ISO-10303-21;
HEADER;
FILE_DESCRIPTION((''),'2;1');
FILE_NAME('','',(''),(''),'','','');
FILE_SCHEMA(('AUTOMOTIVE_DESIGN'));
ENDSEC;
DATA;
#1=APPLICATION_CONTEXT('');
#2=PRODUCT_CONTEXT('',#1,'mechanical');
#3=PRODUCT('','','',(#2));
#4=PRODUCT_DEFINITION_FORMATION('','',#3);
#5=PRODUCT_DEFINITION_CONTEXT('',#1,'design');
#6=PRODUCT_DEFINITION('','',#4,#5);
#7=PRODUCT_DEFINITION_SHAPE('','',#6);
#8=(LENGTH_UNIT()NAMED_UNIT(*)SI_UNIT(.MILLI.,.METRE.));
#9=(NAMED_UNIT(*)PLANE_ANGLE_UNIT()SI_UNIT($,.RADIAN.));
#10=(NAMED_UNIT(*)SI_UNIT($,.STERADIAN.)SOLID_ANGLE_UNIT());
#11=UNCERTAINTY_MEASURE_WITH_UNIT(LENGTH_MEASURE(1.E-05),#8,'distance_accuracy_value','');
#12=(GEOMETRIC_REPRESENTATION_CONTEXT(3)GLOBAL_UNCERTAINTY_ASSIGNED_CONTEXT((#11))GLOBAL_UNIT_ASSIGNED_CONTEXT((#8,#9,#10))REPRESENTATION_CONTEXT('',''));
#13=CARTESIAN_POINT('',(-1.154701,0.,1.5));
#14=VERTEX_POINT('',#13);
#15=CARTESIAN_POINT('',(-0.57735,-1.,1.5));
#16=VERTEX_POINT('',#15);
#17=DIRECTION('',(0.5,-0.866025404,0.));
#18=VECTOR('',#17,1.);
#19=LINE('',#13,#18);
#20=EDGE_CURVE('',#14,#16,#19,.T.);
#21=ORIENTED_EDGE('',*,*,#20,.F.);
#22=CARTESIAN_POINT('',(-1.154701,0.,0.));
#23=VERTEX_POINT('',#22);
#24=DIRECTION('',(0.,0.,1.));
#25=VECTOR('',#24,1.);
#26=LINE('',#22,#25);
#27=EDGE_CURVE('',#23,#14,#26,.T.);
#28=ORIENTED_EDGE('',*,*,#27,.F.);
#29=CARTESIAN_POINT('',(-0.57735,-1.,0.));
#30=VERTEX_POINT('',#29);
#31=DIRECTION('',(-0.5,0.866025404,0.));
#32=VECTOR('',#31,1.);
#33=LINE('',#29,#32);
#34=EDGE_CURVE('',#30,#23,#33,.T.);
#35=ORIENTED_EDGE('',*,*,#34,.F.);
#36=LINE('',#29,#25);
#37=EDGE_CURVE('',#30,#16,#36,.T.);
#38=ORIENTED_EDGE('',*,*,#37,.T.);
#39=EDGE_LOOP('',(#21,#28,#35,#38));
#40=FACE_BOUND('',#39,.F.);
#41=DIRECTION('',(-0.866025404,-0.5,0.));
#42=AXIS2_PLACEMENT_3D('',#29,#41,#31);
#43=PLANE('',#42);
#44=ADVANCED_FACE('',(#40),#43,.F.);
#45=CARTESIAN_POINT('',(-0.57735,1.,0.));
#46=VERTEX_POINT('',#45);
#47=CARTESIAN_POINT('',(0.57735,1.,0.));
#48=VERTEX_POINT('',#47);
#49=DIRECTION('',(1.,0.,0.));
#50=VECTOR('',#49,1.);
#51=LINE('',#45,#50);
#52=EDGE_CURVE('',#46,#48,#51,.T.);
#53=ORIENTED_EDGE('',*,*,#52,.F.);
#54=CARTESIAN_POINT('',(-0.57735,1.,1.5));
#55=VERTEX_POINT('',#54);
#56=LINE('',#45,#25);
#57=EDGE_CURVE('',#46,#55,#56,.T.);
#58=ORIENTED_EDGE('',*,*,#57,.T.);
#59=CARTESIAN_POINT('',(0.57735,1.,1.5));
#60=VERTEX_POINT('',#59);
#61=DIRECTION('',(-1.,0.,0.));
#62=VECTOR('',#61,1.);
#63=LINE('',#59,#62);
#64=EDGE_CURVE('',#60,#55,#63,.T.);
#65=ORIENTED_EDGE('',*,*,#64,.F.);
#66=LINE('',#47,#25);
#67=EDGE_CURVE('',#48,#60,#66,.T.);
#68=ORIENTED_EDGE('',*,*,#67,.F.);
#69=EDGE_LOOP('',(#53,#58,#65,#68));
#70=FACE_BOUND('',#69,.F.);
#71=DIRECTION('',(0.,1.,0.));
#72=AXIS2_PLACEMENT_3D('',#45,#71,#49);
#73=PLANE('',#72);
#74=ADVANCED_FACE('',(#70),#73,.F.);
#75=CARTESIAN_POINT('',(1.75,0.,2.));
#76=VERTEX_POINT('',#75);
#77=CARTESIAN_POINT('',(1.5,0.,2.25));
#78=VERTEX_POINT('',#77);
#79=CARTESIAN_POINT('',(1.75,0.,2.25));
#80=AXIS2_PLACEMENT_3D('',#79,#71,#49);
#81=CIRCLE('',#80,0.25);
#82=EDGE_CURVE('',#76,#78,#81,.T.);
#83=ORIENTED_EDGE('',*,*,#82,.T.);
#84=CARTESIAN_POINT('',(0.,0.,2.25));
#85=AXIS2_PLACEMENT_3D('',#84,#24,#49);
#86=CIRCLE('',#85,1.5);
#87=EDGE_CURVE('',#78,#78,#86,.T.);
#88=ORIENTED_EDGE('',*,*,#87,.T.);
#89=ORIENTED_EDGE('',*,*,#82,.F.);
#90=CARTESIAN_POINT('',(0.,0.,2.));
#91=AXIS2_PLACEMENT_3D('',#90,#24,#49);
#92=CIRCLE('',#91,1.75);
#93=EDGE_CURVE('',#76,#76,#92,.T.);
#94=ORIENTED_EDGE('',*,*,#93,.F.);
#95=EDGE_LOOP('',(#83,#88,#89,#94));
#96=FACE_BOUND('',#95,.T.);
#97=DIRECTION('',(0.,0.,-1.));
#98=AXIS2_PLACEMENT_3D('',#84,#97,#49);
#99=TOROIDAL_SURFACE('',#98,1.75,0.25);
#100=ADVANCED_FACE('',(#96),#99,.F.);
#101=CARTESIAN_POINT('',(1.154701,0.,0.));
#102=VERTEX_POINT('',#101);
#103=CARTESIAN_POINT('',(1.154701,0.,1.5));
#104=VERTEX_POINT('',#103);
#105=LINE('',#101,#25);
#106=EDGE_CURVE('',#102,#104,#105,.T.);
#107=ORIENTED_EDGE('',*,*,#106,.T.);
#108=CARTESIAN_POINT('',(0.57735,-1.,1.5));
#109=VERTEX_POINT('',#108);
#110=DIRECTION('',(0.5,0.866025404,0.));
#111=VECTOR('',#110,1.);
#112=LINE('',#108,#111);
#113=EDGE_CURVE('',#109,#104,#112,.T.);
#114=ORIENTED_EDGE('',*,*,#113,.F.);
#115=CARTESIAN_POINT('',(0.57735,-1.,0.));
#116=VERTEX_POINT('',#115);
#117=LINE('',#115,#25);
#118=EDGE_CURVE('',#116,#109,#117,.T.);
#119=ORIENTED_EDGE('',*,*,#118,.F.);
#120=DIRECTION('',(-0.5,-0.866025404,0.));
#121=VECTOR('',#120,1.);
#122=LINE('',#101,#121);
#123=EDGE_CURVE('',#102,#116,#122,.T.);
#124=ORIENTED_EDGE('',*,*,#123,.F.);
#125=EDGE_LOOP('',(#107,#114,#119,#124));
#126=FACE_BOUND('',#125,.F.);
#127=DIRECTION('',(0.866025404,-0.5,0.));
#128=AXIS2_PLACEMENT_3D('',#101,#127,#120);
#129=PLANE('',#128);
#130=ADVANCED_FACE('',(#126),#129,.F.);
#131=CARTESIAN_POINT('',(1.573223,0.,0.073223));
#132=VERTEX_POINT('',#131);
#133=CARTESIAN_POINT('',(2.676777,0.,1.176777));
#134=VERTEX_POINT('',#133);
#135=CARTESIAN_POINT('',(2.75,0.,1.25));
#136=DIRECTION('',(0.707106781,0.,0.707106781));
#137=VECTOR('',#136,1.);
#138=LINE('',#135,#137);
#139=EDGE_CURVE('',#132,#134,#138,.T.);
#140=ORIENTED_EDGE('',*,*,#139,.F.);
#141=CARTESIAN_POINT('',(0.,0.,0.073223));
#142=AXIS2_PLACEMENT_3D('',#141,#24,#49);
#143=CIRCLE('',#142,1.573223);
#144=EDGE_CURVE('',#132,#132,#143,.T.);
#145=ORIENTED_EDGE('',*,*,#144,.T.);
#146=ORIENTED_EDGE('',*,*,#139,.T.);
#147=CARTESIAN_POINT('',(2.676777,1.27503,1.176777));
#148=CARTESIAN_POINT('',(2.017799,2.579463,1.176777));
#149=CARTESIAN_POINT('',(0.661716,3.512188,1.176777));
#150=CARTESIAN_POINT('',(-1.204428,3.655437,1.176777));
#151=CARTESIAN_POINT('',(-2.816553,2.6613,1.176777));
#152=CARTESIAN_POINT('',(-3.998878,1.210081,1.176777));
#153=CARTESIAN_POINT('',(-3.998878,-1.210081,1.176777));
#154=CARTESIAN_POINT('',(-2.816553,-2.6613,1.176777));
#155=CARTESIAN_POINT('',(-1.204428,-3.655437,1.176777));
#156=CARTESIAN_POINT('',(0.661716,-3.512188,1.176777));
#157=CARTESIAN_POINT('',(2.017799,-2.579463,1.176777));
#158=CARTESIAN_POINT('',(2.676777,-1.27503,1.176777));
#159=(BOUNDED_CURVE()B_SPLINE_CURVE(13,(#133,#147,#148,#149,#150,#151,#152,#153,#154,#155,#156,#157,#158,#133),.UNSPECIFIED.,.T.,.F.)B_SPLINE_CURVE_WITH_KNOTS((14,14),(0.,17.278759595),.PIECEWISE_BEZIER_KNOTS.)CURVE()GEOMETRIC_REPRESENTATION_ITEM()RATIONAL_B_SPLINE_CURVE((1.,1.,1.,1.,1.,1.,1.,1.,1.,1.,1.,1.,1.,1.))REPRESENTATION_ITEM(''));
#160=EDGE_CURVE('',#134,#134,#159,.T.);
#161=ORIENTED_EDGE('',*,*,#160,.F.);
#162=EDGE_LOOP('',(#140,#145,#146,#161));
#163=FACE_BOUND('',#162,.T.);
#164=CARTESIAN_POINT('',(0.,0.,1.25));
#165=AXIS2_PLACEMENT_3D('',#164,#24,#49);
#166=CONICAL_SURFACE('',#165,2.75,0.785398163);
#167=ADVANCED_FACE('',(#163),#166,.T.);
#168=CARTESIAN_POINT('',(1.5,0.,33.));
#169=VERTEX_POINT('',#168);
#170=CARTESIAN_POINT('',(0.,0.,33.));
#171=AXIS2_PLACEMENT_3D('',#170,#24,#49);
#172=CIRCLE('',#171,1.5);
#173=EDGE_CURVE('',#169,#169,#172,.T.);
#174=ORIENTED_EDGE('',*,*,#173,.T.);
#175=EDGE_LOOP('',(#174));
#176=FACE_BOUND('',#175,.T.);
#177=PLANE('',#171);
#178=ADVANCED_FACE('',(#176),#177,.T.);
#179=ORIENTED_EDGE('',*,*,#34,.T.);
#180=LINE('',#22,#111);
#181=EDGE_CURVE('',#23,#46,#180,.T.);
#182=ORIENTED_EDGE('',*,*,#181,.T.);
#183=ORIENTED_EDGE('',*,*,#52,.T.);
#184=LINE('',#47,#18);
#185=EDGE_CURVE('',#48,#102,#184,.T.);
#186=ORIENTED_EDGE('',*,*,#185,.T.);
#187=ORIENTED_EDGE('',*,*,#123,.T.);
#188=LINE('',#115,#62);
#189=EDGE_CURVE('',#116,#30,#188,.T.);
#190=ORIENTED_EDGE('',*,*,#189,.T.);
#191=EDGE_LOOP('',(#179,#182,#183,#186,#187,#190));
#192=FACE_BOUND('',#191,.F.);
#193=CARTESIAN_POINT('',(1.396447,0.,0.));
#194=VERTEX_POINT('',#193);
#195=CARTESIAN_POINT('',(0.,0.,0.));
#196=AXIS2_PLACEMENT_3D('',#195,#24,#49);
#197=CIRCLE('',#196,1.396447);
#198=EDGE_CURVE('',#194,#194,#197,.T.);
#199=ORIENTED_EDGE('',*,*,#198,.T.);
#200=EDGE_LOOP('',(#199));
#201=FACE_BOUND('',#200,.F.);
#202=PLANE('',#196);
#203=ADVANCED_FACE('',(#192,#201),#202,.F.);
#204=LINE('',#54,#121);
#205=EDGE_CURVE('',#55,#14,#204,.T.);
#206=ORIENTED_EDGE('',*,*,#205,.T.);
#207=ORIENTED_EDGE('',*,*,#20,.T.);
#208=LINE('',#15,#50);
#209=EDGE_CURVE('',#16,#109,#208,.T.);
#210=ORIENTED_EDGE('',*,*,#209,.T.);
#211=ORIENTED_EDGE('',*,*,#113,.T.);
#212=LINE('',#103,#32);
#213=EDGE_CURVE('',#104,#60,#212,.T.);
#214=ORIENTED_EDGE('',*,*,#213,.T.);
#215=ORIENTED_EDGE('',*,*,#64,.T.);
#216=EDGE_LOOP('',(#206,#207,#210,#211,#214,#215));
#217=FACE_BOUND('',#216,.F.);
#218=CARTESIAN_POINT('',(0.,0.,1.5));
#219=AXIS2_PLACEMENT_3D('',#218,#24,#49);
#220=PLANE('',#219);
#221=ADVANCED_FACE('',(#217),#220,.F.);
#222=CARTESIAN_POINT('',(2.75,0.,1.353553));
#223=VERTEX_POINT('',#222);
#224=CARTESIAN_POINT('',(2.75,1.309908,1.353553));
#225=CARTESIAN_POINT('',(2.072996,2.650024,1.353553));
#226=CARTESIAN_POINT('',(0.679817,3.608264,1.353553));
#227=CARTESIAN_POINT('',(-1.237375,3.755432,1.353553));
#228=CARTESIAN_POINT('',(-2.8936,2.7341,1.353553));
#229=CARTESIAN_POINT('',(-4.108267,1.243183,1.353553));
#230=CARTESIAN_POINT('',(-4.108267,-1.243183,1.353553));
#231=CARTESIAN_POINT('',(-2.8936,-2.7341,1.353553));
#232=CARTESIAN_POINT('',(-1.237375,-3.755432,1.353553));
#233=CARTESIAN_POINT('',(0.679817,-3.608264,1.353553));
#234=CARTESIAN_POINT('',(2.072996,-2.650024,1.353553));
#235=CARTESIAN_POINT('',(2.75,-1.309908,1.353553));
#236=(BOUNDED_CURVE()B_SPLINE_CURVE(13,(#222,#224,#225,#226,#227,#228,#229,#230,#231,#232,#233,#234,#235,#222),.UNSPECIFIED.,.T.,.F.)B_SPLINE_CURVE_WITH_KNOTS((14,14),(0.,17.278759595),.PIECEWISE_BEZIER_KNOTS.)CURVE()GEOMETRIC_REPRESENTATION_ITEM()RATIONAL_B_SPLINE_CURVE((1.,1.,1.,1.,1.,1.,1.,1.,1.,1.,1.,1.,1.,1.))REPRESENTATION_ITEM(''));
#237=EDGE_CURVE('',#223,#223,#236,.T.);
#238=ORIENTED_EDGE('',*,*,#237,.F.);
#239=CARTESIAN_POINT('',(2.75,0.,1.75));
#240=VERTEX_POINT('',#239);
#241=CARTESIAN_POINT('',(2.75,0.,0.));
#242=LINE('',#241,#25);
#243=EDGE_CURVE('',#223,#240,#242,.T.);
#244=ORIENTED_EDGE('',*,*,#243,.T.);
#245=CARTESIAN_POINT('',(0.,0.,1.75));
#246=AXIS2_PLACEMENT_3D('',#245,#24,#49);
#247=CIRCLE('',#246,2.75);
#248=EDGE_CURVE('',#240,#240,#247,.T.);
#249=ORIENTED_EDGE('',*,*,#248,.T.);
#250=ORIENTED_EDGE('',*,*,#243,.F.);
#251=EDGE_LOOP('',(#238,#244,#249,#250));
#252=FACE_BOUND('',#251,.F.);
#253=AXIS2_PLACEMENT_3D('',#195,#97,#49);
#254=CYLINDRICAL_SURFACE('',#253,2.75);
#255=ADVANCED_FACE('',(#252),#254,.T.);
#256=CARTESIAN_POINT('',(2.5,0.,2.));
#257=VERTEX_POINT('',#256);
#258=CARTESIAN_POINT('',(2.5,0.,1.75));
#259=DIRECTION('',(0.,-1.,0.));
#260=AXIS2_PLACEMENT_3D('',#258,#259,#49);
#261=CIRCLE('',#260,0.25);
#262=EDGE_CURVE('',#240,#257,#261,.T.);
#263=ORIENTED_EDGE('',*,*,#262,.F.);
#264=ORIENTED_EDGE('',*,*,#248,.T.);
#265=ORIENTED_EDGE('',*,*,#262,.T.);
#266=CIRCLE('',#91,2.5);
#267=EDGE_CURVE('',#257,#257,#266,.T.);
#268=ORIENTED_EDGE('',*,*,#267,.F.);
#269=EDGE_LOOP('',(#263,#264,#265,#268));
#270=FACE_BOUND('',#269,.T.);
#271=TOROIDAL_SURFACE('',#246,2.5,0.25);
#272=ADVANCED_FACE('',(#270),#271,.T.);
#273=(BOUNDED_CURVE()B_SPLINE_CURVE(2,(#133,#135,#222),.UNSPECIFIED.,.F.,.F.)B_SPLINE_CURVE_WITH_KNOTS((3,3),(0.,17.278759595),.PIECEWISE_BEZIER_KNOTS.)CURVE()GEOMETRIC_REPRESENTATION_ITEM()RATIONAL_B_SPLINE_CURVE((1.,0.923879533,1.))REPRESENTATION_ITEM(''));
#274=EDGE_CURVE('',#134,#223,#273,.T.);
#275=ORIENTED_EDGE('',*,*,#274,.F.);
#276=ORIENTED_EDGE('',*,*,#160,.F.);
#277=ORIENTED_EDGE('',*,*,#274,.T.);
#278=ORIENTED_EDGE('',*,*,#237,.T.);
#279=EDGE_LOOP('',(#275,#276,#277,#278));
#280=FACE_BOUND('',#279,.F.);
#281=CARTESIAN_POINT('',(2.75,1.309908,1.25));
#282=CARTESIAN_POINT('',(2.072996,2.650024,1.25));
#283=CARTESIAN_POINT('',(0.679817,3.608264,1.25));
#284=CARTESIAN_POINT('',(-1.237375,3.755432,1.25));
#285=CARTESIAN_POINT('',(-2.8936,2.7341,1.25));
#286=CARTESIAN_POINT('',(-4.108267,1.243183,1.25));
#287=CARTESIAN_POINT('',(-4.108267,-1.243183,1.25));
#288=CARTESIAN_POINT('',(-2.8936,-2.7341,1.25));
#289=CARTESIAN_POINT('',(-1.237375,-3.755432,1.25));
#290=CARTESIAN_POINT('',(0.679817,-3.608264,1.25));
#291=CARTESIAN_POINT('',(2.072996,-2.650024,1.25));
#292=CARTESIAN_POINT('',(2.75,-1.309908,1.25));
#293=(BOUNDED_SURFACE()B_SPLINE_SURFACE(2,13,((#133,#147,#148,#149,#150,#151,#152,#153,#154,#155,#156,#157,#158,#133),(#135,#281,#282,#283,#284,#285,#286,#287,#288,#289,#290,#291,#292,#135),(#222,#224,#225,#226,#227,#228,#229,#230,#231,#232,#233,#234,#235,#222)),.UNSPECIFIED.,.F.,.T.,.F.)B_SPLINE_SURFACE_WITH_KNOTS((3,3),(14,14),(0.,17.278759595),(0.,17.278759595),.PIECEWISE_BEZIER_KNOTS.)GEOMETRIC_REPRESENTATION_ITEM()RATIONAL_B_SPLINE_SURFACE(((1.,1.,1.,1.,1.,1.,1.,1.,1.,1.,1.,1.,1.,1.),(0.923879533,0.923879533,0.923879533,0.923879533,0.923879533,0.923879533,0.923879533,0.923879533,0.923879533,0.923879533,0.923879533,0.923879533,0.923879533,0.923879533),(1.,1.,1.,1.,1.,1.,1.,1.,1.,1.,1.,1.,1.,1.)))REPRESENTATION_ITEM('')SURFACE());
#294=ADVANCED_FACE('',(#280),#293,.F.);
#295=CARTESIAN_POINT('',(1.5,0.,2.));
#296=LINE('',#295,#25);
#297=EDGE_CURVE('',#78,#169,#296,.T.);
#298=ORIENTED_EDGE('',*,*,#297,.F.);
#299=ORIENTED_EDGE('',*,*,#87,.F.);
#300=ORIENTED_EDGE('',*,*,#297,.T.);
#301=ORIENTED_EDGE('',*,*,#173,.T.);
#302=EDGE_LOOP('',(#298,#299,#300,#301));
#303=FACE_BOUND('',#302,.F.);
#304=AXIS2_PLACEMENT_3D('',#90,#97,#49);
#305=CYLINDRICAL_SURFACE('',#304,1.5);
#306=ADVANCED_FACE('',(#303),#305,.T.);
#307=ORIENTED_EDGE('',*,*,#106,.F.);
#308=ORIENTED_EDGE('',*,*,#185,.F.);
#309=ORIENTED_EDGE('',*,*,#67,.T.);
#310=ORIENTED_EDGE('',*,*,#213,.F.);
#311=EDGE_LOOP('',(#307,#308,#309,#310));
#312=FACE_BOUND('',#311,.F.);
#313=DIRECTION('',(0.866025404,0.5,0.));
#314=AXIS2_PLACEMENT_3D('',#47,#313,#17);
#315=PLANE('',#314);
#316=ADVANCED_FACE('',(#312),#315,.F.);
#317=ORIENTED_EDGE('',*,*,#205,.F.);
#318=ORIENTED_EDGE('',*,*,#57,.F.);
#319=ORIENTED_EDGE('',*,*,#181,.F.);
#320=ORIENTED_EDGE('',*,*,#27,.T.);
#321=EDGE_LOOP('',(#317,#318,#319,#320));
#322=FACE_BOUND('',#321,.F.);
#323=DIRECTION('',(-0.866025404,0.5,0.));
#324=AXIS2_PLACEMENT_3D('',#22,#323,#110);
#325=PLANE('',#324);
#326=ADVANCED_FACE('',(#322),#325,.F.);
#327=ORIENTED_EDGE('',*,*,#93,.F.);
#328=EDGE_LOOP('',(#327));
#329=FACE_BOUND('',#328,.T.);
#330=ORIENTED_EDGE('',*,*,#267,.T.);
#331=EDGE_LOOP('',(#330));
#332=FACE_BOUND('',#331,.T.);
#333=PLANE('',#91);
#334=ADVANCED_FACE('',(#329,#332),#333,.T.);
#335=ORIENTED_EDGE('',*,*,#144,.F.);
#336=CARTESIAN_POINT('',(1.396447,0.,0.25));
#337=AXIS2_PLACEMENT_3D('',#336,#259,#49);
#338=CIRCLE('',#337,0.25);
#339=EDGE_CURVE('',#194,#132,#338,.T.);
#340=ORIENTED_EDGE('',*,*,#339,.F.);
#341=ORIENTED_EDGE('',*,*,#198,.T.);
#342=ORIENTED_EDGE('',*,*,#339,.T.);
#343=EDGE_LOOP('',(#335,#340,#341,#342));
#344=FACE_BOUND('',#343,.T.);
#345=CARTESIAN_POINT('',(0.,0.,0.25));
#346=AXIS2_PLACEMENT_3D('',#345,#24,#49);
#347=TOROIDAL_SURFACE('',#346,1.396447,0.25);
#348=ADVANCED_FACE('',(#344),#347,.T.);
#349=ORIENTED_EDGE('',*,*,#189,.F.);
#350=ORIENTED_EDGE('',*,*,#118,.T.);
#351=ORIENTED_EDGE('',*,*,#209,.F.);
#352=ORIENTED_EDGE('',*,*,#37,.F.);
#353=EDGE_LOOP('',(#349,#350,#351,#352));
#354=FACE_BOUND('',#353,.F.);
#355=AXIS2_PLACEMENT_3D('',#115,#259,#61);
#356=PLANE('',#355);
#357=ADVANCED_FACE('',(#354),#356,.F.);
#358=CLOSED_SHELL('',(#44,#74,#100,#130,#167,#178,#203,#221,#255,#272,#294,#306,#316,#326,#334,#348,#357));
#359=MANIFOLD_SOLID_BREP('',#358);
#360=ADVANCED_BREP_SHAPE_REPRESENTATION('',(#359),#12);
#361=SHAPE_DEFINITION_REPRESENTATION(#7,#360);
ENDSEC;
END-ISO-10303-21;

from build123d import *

# Parameters (mm, degrees)
F1_R     = 2.75
F1_R_2   = 1.5
F2_DEPTH = 2
F3_START = 1.5
F3_DEPTH = 0.5
F4_START = 2
F4_DEPTH = 31
F5_SIZE2 = 1.25
F5_SIZE  = 1.25
F6_R     = 0.25


# Not quite as in the source:
# - a feature names something its author has since deleted; it is built from what else it names


with BuildPart() as f2:
    # F1 (on Top) → F2 (new body)
    with BuildSketch(Plane.XY):
        Circle(F1_R)
        Circle(F1_R_2, mode=Mode.SUBTRACT)
        Circle(F1_R_2)
        Polygon((-0.5773502692, -1), (-1.1547005384, 0), (-0.5773502692, 1), (0.5773502692, 1), (1.1547005384, 0), (0.5773502692, -1), align=None, mode=Mode.SUBTRACT)
    extrude(amount=F2_DEPTH)

    # F1 (on Top) → F3 (join)
    with BuildSketch(Plane.XY.offset(F3_START)):
        Polygon((-0.5773502692, 1), (-1.1547005384, 0), (-0.5773502692, -1), (0.5773502692, -1), (1.1547005384, 0), (0.5773502692, 1), align=None)
    extrude(amount=F3_DEPTH)

    # F1 (on Top) → F4 (join)
    with BuildSketch(Plane.XY.offset(F4_START)):
        Circle(F1_R_2)
        Polygon((-0.5773502692, -1), (-1.1547005384, 0), (-0.5773502692, 1), (0.5773502692, 1), (1.1547005384, 0), (0.5773502692, -1), align=None, mode=Mode.SUBTRACT)
        Polygon((-0.5773502692, 1), (-1.1547005384, 0), (-0.5773502692, -1), (0.5773502692, -1), (1.1547005384, 0), (0.5773502692, 1), align=None)
    extrude(amount=F4_DEPTH)

    # F5
    f5_edges = [f2.edges().sort_by_distance(p)[0] for p in [
        (-2.75, 0, 0),
    ]]
    chamfer(f5_edges, length=F5_SIZE, length2=F5_SIZE2)

    # F6
    f6_edges = [f2.edges().sort_by_distance(p)[0] for p in [
        (-2.75, 0, 2),
        (-1.5, 0, 2),
        (-1.5, 0, 0),
        (-2.75, 0, 1.25),
    ]]
    fillet(f6_edges, radius=F6_R)


solid = f2.part
